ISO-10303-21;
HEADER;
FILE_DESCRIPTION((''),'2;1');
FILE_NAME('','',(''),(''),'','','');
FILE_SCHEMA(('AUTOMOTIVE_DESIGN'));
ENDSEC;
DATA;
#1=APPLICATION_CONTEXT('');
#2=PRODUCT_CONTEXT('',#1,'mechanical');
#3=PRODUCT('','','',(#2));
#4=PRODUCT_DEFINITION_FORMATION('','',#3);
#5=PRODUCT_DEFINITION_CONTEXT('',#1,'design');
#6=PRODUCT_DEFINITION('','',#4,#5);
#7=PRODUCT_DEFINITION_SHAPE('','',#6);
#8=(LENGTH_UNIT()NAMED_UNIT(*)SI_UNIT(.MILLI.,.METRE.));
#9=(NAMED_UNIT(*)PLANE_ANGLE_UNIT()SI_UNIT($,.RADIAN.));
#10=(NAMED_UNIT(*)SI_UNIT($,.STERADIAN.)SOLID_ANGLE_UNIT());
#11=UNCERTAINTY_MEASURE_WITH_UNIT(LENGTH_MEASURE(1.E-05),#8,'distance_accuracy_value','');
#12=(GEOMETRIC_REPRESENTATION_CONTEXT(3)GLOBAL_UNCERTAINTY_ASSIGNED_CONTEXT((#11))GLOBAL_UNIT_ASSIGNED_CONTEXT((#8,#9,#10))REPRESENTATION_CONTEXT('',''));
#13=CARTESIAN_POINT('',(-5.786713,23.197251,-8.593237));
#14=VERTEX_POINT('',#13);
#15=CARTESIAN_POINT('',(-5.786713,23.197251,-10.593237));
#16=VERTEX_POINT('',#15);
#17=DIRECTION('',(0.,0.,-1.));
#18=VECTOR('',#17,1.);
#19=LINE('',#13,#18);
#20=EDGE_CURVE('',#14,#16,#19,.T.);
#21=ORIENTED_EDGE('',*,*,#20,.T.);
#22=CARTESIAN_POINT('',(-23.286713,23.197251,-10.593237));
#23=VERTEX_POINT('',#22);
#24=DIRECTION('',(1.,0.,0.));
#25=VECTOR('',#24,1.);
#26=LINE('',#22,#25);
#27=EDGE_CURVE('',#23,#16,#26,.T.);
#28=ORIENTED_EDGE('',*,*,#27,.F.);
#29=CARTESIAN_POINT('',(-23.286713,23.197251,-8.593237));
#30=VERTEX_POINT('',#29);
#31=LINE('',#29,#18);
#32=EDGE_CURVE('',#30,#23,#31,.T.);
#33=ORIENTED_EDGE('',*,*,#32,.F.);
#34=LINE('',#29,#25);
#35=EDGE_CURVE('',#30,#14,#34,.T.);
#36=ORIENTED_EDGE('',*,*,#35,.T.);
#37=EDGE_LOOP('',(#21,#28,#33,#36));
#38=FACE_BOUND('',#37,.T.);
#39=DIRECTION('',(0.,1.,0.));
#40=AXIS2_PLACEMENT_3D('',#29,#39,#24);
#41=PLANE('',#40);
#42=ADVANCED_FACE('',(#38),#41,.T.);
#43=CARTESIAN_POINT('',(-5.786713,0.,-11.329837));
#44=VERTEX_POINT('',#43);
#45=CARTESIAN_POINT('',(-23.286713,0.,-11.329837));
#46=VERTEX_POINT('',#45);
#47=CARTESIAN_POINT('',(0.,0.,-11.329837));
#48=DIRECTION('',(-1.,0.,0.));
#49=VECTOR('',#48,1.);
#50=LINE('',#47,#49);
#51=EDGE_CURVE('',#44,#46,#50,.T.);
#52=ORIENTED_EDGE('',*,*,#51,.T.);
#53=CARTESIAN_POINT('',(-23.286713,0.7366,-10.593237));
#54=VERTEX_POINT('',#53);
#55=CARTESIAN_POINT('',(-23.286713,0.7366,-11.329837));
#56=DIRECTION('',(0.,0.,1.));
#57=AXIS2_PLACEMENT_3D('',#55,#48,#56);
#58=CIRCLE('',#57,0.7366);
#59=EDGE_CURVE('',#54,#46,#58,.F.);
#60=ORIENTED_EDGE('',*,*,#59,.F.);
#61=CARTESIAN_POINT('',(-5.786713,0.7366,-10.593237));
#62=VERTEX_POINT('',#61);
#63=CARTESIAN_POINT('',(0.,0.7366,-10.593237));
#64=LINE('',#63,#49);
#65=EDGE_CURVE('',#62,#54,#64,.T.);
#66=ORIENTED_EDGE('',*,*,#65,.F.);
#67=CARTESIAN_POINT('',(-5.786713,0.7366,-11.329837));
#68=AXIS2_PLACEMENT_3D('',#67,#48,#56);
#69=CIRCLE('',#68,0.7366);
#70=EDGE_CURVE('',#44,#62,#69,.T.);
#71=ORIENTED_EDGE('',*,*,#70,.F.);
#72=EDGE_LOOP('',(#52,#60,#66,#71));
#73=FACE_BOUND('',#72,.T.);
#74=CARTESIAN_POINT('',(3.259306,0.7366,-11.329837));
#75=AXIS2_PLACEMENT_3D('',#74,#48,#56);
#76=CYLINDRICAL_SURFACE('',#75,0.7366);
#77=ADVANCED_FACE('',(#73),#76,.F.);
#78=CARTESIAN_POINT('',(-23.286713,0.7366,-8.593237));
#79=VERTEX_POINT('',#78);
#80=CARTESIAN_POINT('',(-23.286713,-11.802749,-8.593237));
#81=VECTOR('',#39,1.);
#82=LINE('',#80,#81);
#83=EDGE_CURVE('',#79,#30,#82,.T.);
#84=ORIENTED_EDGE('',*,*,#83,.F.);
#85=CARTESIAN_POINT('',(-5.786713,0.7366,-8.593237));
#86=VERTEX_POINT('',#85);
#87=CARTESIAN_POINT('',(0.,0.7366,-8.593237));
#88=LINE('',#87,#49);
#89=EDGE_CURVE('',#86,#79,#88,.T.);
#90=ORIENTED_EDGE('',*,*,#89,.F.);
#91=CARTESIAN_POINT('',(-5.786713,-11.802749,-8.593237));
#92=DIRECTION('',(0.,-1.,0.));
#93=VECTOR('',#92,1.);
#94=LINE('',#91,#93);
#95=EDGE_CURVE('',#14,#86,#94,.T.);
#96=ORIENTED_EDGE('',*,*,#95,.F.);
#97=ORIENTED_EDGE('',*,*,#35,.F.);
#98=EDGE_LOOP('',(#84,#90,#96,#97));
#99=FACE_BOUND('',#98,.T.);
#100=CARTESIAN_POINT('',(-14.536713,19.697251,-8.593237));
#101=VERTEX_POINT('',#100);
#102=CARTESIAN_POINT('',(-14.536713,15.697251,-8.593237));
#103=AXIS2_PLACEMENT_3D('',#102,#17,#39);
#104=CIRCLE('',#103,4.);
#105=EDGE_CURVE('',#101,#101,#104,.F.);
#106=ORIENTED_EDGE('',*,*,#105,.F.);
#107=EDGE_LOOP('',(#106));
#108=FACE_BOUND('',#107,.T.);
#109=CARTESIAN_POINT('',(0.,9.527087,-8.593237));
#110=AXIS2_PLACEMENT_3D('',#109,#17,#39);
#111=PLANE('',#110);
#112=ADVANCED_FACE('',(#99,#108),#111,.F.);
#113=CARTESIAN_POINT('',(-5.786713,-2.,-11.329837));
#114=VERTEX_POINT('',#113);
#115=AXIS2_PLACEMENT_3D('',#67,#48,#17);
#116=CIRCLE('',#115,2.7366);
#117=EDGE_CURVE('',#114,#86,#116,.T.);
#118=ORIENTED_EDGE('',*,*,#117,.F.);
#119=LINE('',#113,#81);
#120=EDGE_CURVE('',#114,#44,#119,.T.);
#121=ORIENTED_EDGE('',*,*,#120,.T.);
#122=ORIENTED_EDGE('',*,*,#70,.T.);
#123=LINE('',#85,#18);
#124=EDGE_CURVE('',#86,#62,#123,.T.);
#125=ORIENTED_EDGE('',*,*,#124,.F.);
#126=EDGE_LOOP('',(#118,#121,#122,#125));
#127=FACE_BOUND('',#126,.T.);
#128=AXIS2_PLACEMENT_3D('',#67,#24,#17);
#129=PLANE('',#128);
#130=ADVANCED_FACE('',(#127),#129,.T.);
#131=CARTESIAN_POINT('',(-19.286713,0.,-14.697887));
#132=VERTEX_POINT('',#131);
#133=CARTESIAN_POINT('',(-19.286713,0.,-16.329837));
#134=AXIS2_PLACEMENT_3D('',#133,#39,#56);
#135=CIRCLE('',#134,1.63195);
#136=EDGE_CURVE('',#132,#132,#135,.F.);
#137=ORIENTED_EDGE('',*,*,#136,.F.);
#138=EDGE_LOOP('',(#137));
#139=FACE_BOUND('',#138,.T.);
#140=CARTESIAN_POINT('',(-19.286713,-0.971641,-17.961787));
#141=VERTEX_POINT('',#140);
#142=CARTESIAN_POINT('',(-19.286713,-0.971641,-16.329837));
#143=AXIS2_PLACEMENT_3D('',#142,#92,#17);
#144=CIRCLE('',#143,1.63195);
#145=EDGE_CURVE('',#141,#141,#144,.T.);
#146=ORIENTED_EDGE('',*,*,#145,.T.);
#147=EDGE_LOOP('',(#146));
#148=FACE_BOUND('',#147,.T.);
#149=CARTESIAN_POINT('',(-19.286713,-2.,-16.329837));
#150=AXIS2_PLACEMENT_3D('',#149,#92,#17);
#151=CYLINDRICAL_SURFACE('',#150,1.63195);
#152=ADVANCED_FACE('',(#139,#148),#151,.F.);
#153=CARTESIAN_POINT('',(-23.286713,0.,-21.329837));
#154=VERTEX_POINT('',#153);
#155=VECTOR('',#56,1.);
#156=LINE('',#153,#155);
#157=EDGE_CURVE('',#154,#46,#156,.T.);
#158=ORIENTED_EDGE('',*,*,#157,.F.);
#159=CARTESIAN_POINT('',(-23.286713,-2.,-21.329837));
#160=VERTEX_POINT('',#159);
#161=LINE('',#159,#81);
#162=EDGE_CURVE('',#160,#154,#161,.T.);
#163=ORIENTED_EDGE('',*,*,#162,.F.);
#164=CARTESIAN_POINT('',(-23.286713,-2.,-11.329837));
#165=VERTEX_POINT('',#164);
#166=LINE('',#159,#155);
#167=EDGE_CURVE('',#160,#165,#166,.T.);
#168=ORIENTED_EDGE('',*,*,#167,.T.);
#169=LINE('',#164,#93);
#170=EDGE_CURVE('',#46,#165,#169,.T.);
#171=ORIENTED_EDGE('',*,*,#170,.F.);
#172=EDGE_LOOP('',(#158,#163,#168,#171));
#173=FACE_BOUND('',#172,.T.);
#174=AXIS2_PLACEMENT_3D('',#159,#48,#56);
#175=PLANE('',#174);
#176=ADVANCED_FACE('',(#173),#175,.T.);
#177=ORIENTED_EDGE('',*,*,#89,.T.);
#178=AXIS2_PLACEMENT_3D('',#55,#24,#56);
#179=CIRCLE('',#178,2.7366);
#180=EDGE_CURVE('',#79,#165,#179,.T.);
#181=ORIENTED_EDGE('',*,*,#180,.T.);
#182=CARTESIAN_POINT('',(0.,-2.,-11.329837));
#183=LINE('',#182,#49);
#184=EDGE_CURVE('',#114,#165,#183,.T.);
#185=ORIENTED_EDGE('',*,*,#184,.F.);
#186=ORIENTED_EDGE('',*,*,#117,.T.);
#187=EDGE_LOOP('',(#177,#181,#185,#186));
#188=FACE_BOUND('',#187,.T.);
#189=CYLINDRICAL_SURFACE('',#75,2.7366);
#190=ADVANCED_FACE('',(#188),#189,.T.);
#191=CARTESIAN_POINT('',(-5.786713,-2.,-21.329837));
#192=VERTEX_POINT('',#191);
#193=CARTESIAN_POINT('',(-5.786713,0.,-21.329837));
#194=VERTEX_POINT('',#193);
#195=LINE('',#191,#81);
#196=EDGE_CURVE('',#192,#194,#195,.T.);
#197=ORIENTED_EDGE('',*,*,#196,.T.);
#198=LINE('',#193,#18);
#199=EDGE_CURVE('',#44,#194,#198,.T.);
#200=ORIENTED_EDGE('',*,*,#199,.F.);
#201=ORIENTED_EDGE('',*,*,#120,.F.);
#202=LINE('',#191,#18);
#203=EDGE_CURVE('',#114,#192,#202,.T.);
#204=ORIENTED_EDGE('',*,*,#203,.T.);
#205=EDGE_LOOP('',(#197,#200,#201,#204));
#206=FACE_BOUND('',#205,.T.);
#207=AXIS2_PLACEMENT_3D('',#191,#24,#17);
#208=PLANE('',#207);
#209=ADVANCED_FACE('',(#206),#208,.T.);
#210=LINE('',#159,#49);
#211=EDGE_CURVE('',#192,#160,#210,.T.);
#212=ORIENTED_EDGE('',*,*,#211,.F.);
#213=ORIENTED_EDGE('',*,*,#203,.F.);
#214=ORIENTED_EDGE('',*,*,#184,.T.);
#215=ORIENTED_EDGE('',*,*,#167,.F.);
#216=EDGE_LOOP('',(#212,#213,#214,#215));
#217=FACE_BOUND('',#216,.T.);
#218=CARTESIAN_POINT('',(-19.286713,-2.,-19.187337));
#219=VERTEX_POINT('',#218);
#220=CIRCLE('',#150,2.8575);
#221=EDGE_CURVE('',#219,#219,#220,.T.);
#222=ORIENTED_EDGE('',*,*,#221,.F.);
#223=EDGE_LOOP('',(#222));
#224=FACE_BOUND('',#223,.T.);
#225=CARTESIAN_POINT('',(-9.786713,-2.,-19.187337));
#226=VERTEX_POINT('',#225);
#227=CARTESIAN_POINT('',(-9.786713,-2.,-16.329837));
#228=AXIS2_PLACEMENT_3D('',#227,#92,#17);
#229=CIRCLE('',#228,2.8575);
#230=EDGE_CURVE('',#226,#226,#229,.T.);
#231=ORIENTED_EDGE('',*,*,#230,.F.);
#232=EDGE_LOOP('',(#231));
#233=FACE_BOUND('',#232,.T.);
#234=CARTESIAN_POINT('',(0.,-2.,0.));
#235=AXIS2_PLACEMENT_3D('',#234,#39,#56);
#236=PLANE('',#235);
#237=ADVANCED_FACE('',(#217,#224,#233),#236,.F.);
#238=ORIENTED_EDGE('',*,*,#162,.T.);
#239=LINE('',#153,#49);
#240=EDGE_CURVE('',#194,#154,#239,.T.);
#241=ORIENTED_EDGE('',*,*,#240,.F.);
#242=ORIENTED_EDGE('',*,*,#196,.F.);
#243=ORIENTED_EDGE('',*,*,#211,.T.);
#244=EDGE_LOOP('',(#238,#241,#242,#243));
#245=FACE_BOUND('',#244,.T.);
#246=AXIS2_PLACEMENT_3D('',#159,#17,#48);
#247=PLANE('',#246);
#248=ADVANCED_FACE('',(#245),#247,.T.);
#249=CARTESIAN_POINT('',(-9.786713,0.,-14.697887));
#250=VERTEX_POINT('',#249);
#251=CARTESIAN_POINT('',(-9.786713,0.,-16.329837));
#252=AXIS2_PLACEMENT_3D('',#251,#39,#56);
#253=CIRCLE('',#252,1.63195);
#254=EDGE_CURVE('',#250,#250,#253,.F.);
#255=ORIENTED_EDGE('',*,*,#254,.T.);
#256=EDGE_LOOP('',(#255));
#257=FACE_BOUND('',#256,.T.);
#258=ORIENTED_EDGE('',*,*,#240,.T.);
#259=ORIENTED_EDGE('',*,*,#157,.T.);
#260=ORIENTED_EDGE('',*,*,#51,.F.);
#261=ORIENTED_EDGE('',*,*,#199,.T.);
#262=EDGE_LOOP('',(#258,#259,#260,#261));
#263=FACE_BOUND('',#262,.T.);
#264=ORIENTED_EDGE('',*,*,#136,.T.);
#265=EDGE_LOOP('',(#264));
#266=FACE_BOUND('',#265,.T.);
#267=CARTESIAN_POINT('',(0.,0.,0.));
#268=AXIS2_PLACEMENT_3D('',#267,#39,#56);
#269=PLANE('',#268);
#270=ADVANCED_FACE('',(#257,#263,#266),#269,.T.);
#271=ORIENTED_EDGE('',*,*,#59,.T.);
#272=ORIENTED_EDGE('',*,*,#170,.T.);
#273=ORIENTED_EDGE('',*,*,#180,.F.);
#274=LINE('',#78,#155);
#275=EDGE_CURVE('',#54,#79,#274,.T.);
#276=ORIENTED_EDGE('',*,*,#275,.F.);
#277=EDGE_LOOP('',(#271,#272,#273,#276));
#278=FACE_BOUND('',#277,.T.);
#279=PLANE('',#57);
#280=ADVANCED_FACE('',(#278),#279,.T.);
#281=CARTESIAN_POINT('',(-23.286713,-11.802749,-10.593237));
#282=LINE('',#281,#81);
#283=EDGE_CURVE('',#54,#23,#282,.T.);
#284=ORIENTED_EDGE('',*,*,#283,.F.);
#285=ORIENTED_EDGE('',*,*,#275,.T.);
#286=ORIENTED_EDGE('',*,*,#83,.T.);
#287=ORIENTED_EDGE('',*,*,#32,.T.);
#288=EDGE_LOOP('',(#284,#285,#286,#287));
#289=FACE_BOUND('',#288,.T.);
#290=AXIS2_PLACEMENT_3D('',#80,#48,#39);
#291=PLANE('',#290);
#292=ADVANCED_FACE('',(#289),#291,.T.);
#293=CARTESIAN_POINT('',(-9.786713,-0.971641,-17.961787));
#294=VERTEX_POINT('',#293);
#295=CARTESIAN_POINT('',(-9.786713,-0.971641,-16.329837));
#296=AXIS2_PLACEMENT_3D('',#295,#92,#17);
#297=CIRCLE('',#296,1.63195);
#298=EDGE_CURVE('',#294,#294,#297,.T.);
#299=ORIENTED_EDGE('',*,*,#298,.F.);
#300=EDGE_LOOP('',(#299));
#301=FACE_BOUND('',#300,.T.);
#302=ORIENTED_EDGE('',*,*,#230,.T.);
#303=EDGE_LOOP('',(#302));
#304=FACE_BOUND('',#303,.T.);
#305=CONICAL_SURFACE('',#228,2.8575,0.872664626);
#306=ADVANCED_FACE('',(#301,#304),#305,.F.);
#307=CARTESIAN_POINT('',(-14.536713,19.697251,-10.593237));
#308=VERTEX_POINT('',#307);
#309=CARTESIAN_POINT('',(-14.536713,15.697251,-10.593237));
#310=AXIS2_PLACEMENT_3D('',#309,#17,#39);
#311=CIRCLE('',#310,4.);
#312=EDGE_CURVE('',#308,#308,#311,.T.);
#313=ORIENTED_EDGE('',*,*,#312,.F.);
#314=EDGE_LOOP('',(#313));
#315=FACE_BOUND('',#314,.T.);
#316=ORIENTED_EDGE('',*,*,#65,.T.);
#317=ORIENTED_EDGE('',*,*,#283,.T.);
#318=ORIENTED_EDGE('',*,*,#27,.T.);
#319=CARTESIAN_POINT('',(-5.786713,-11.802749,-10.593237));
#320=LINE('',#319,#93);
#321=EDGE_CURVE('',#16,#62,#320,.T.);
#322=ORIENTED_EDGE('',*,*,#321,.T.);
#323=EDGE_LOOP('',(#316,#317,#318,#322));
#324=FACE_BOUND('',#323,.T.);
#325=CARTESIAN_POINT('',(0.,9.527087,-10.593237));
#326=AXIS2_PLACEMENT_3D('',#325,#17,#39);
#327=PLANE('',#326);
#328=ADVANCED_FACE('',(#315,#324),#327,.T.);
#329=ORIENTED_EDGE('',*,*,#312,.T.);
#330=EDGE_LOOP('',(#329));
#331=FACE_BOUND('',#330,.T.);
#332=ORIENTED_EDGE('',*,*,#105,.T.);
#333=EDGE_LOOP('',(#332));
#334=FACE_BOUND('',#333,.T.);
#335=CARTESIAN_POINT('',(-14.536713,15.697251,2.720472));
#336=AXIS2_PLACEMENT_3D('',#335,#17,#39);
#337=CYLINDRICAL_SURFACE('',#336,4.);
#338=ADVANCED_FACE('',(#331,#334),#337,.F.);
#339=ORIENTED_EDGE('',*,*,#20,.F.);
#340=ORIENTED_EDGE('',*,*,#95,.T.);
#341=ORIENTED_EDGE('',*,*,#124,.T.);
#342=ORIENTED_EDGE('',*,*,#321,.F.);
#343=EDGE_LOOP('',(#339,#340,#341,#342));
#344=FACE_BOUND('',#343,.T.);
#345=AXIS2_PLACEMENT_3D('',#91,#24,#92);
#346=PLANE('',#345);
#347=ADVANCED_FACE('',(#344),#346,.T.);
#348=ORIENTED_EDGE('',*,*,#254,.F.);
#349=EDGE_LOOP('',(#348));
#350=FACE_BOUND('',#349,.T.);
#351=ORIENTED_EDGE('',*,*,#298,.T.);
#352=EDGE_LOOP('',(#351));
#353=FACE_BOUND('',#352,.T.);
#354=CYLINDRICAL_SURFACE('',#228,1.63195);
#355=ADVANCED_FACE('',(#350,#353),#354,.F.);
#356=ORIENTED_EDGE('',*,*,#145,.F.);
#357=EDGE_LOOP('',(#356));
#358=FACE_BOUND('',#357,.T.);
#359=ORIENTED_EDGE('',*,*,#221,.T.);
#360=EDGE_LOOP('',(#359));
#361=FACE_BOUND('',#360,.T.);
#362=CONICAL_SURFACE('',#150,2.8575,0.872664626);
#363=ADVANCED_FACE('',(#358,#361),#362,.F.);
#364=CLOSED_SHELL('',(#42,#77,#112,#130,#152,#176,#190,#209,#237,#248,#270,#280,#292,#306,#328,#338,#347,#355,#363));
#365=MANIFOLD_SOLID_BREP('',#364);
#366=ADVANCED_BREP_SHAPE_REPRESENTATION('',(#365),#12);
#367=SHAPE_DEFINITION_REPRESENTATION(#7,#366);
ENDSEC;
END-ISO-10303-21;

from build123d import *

# Parameters (mm, degrees)
SKETCH1_W                                         = 17.5
SKETCH1_H                                         = 35
BASE_FLANGE1_DEPTH                                = 2
SKETCH11_R                                        = 4
CUT_EXTRUDE3_DEPTH                                = 2
SKETCHED_START                                    = -23.286713287
SKETCHED_BEND3_DEPTH                              = 17.5
SKETCHED_BEND3_2_DEPTH                            = 4.7499999
SKETCHED_START_2                                  = -10.536713187
SKETCHED_BEND3_3_DEPTH                            = 4.7499999
SKETCHED_START_3                                  = -18.536713387
SKETCHED_BEND3_4_DEPTH                            = 8.0000002
SKETCHED_START_4                                  = -10.59323683
SKETCHED_BEND3_5_OUTLINE_R                        = 4
SKETCHED_BEND3_5_DEPTH                            = 2
CSK_FOR_4_FLAT_HEAD_MACHINE_SCREW_100_D           = 3.2639
CSK_FOR_4_FLAT_HEAD_MACHINE_SCREW_100_DEPTH       = 2
CSK_FOR_4_FLAT_HEAD_MACHINE_SCREW_100_CSINK_D     = 5.715
CSK_FOR_4_FLAT_HEAD_MACHINE_SCREW_100_CSINK_ANGLE = 100
CSK_FOR_4_FLAT_HEAD_MACHINE_SCREW_100_TIP         = 0.980574487


with BuildPart() as part:
    # Base-Flange1: sheet metal written as solids
    # Sketch1 → Base-Flange1 (new body)
    with BuildSketch(Plane(origin=(0, 0, 0), x_dir=(1, 0, 0), z_dir=(0, 1, 0))):
        with Locations((-14.536713287, 3.82983683)):
            Rectangle(SKETCH1_W, SKETCH1_H)
    extrude(amount=-BASE_FLANGE1_DEPTH)

    # Sketch11 → Cut-Extrude3 (cut)
    with BuildSketch(Plane(origin=(0, 0, 0), x_dir=(1, 0, 0), z_dir=(0, 1, 0))):
        with Locations(Location((-14.536713287, -6.17016317, 0), (0, 0, 270))):
            Circle(SKETCH11_R)
    extrude(amount=-CUT_EXTRUDE3_DEPTH, mode=Mode.SUBTRACT)

    # Sketched Bend3: read off the stored shape, not the designer's step
    # Sketched Bend3 outline → Sketched Bend3 (cut)
    with BuildSketch(Plane.YZ.offset(SKETCHED_START)):
        with BuildLine():
            ThreePointArc((-2, -11.32983683), (-1.443395312, -9.675569621), (0, -8.694234432))
            Line((0, -8.694234432), (0, 13.67016317))
            Line((0, 13.67016317), (-2, 13.67016317))
            Line((-2, 13.67016317), (-2, -11.32983683))
        make_face()
    extrude(amount=SKETCHED_BEND3_DEPTH, mode=Mode.SUBTRACT)

    # Sketched Bend3 2 outline → Sketched Bend3 2 (add)
    with BuildSketch(Plane.YZ.offset(SKETCHED_START)):
        with BuildLine():
            ThreePointArc((0, -11.32983683), (0.215745145, -10.808981975), (0.7366, -10.59323683))
            Line((0.7366, -10.59323683), (23.197250658, -10.59323683))
            Line((23.197250658, -10.59323683), (23.197250658, -8.59323683))
            Line((23.197250658, -8.59323683), (0.7366, -8.59323683))
            ThreePointArc((0.7366, -8.59323683), (0.364854094, -8.6186038), (0, -8.694234432))
            Line((0, -8.694234432), (0, -11.32983683))
        make_face()
    extrude(amount=SKETCHED_BEND3_2_DEPTH)

    # Sketched Bend3 3 outline → Sketched Bend3 3 (add)
    with BuildSketch(Plane.YZ.offset(SKETCHED_START_2)):
        with BuildLine():
            ThreePointArc((0, -11.32983683), (0.215745145, -10.808981975), (0.7366, -10.59323683))
            Line((0.7366, -10.59323683), (23.197250658, -10.59323683))
            Line((23.197250658, -10.59323683), (23.197250658, -8.59323683))
            Line((23.197250658, -8.59323683), (0.7366, -8.59323683))
            ThreePointArc((0.7366, -8.59323683), (0.364854094, -8.6186038), (0, -8.694234432))
            Line((0, -8.694234432), (0, -11.32983683))
        make_face()
    extrude(amount=SKETCHED_BEND3_3_DEPTH)

    # Sketched Bend3 4 outline → Sketched Bend3 4 (add)
    with BuildSketch(Plane.YZ.offset(SKETCHED_START_3)):
        with BuildLine():
            ThreePointArc((0, -11.32983683), (0.215745145, -10.808981975), (0.7366, -10.59323683))
            Line((0.7366, -10.59323683), (23.197250658, -10.59323683))
            Line((23.197250658, -10.59323683), (23.197250658, -8.59323683))
            Line((23.197250658, -8.59323683), (0.7366, -8.59323683))
            ThreePointArc((0.7366, -8.59323683), (0.364854094, -8.6186038), (0, -8.694234432))
            Line((0, -8.694234432), (0, -11.32983683))
        make_face()
    extrude(amount=SKETCHED_BEND3_4_DEPTH)

    # Sketched Bend3 5 outline → Sketched Bend3 5 (cut)
    with BuildSketch(Plane.XY.offset(SKETCHED_START_4)):
        with Locations((-14.536713287, 15.697250658)):
            Circle(SKETCHED_BEND3_5_OUTLINE_R)
    extrude(amount=SKETCHED_BEND3_5_DEPTH, mode=Mode.SUBTRACT)

    # CSK for #4 Flat Head Machine Screw (100)2
    with Locations(Plane.XZ.offset(2)):
        with Locations((-9.786713287, -16.32983683), (-19.286713287, -16.32983683)):
            CounterSinkHole(CSK_FOR_4_FLAT_HEAD_MACHINE_SCREW_100_D / 2, CSK_FOR_4_FLAT_HEAD_MACHINE_SCREW_100_CSINK_D / 2, depth=CSK_FOR_4_FLAT_HEAD_MACHINE_SCREW_100_DEPTH, counter_sink_angle=CSK_FOR_4_FLAT_HEAD_MACHINE_SCREW_100_CSINK_ANGLE)
            with Locations((0, 0, -(CSK_FOR_4_FLAT_HEAD_MACHINE_SCREW_100_DEPTH + CSK_FOR_4_FLAT_HEAD_MACHINE_SCREW_100_TIP / 2))):  # 118° drill point
                Cone(0, CSK_FOR_4_FLAT_HEAD_MACHINE_SCREW_100_D / 2, CSK_FOR_4_FLAT_HEAD_MACHINE_SCREW_100_TIP, mode=Mode.SUBTRACT)


solid = part.part
